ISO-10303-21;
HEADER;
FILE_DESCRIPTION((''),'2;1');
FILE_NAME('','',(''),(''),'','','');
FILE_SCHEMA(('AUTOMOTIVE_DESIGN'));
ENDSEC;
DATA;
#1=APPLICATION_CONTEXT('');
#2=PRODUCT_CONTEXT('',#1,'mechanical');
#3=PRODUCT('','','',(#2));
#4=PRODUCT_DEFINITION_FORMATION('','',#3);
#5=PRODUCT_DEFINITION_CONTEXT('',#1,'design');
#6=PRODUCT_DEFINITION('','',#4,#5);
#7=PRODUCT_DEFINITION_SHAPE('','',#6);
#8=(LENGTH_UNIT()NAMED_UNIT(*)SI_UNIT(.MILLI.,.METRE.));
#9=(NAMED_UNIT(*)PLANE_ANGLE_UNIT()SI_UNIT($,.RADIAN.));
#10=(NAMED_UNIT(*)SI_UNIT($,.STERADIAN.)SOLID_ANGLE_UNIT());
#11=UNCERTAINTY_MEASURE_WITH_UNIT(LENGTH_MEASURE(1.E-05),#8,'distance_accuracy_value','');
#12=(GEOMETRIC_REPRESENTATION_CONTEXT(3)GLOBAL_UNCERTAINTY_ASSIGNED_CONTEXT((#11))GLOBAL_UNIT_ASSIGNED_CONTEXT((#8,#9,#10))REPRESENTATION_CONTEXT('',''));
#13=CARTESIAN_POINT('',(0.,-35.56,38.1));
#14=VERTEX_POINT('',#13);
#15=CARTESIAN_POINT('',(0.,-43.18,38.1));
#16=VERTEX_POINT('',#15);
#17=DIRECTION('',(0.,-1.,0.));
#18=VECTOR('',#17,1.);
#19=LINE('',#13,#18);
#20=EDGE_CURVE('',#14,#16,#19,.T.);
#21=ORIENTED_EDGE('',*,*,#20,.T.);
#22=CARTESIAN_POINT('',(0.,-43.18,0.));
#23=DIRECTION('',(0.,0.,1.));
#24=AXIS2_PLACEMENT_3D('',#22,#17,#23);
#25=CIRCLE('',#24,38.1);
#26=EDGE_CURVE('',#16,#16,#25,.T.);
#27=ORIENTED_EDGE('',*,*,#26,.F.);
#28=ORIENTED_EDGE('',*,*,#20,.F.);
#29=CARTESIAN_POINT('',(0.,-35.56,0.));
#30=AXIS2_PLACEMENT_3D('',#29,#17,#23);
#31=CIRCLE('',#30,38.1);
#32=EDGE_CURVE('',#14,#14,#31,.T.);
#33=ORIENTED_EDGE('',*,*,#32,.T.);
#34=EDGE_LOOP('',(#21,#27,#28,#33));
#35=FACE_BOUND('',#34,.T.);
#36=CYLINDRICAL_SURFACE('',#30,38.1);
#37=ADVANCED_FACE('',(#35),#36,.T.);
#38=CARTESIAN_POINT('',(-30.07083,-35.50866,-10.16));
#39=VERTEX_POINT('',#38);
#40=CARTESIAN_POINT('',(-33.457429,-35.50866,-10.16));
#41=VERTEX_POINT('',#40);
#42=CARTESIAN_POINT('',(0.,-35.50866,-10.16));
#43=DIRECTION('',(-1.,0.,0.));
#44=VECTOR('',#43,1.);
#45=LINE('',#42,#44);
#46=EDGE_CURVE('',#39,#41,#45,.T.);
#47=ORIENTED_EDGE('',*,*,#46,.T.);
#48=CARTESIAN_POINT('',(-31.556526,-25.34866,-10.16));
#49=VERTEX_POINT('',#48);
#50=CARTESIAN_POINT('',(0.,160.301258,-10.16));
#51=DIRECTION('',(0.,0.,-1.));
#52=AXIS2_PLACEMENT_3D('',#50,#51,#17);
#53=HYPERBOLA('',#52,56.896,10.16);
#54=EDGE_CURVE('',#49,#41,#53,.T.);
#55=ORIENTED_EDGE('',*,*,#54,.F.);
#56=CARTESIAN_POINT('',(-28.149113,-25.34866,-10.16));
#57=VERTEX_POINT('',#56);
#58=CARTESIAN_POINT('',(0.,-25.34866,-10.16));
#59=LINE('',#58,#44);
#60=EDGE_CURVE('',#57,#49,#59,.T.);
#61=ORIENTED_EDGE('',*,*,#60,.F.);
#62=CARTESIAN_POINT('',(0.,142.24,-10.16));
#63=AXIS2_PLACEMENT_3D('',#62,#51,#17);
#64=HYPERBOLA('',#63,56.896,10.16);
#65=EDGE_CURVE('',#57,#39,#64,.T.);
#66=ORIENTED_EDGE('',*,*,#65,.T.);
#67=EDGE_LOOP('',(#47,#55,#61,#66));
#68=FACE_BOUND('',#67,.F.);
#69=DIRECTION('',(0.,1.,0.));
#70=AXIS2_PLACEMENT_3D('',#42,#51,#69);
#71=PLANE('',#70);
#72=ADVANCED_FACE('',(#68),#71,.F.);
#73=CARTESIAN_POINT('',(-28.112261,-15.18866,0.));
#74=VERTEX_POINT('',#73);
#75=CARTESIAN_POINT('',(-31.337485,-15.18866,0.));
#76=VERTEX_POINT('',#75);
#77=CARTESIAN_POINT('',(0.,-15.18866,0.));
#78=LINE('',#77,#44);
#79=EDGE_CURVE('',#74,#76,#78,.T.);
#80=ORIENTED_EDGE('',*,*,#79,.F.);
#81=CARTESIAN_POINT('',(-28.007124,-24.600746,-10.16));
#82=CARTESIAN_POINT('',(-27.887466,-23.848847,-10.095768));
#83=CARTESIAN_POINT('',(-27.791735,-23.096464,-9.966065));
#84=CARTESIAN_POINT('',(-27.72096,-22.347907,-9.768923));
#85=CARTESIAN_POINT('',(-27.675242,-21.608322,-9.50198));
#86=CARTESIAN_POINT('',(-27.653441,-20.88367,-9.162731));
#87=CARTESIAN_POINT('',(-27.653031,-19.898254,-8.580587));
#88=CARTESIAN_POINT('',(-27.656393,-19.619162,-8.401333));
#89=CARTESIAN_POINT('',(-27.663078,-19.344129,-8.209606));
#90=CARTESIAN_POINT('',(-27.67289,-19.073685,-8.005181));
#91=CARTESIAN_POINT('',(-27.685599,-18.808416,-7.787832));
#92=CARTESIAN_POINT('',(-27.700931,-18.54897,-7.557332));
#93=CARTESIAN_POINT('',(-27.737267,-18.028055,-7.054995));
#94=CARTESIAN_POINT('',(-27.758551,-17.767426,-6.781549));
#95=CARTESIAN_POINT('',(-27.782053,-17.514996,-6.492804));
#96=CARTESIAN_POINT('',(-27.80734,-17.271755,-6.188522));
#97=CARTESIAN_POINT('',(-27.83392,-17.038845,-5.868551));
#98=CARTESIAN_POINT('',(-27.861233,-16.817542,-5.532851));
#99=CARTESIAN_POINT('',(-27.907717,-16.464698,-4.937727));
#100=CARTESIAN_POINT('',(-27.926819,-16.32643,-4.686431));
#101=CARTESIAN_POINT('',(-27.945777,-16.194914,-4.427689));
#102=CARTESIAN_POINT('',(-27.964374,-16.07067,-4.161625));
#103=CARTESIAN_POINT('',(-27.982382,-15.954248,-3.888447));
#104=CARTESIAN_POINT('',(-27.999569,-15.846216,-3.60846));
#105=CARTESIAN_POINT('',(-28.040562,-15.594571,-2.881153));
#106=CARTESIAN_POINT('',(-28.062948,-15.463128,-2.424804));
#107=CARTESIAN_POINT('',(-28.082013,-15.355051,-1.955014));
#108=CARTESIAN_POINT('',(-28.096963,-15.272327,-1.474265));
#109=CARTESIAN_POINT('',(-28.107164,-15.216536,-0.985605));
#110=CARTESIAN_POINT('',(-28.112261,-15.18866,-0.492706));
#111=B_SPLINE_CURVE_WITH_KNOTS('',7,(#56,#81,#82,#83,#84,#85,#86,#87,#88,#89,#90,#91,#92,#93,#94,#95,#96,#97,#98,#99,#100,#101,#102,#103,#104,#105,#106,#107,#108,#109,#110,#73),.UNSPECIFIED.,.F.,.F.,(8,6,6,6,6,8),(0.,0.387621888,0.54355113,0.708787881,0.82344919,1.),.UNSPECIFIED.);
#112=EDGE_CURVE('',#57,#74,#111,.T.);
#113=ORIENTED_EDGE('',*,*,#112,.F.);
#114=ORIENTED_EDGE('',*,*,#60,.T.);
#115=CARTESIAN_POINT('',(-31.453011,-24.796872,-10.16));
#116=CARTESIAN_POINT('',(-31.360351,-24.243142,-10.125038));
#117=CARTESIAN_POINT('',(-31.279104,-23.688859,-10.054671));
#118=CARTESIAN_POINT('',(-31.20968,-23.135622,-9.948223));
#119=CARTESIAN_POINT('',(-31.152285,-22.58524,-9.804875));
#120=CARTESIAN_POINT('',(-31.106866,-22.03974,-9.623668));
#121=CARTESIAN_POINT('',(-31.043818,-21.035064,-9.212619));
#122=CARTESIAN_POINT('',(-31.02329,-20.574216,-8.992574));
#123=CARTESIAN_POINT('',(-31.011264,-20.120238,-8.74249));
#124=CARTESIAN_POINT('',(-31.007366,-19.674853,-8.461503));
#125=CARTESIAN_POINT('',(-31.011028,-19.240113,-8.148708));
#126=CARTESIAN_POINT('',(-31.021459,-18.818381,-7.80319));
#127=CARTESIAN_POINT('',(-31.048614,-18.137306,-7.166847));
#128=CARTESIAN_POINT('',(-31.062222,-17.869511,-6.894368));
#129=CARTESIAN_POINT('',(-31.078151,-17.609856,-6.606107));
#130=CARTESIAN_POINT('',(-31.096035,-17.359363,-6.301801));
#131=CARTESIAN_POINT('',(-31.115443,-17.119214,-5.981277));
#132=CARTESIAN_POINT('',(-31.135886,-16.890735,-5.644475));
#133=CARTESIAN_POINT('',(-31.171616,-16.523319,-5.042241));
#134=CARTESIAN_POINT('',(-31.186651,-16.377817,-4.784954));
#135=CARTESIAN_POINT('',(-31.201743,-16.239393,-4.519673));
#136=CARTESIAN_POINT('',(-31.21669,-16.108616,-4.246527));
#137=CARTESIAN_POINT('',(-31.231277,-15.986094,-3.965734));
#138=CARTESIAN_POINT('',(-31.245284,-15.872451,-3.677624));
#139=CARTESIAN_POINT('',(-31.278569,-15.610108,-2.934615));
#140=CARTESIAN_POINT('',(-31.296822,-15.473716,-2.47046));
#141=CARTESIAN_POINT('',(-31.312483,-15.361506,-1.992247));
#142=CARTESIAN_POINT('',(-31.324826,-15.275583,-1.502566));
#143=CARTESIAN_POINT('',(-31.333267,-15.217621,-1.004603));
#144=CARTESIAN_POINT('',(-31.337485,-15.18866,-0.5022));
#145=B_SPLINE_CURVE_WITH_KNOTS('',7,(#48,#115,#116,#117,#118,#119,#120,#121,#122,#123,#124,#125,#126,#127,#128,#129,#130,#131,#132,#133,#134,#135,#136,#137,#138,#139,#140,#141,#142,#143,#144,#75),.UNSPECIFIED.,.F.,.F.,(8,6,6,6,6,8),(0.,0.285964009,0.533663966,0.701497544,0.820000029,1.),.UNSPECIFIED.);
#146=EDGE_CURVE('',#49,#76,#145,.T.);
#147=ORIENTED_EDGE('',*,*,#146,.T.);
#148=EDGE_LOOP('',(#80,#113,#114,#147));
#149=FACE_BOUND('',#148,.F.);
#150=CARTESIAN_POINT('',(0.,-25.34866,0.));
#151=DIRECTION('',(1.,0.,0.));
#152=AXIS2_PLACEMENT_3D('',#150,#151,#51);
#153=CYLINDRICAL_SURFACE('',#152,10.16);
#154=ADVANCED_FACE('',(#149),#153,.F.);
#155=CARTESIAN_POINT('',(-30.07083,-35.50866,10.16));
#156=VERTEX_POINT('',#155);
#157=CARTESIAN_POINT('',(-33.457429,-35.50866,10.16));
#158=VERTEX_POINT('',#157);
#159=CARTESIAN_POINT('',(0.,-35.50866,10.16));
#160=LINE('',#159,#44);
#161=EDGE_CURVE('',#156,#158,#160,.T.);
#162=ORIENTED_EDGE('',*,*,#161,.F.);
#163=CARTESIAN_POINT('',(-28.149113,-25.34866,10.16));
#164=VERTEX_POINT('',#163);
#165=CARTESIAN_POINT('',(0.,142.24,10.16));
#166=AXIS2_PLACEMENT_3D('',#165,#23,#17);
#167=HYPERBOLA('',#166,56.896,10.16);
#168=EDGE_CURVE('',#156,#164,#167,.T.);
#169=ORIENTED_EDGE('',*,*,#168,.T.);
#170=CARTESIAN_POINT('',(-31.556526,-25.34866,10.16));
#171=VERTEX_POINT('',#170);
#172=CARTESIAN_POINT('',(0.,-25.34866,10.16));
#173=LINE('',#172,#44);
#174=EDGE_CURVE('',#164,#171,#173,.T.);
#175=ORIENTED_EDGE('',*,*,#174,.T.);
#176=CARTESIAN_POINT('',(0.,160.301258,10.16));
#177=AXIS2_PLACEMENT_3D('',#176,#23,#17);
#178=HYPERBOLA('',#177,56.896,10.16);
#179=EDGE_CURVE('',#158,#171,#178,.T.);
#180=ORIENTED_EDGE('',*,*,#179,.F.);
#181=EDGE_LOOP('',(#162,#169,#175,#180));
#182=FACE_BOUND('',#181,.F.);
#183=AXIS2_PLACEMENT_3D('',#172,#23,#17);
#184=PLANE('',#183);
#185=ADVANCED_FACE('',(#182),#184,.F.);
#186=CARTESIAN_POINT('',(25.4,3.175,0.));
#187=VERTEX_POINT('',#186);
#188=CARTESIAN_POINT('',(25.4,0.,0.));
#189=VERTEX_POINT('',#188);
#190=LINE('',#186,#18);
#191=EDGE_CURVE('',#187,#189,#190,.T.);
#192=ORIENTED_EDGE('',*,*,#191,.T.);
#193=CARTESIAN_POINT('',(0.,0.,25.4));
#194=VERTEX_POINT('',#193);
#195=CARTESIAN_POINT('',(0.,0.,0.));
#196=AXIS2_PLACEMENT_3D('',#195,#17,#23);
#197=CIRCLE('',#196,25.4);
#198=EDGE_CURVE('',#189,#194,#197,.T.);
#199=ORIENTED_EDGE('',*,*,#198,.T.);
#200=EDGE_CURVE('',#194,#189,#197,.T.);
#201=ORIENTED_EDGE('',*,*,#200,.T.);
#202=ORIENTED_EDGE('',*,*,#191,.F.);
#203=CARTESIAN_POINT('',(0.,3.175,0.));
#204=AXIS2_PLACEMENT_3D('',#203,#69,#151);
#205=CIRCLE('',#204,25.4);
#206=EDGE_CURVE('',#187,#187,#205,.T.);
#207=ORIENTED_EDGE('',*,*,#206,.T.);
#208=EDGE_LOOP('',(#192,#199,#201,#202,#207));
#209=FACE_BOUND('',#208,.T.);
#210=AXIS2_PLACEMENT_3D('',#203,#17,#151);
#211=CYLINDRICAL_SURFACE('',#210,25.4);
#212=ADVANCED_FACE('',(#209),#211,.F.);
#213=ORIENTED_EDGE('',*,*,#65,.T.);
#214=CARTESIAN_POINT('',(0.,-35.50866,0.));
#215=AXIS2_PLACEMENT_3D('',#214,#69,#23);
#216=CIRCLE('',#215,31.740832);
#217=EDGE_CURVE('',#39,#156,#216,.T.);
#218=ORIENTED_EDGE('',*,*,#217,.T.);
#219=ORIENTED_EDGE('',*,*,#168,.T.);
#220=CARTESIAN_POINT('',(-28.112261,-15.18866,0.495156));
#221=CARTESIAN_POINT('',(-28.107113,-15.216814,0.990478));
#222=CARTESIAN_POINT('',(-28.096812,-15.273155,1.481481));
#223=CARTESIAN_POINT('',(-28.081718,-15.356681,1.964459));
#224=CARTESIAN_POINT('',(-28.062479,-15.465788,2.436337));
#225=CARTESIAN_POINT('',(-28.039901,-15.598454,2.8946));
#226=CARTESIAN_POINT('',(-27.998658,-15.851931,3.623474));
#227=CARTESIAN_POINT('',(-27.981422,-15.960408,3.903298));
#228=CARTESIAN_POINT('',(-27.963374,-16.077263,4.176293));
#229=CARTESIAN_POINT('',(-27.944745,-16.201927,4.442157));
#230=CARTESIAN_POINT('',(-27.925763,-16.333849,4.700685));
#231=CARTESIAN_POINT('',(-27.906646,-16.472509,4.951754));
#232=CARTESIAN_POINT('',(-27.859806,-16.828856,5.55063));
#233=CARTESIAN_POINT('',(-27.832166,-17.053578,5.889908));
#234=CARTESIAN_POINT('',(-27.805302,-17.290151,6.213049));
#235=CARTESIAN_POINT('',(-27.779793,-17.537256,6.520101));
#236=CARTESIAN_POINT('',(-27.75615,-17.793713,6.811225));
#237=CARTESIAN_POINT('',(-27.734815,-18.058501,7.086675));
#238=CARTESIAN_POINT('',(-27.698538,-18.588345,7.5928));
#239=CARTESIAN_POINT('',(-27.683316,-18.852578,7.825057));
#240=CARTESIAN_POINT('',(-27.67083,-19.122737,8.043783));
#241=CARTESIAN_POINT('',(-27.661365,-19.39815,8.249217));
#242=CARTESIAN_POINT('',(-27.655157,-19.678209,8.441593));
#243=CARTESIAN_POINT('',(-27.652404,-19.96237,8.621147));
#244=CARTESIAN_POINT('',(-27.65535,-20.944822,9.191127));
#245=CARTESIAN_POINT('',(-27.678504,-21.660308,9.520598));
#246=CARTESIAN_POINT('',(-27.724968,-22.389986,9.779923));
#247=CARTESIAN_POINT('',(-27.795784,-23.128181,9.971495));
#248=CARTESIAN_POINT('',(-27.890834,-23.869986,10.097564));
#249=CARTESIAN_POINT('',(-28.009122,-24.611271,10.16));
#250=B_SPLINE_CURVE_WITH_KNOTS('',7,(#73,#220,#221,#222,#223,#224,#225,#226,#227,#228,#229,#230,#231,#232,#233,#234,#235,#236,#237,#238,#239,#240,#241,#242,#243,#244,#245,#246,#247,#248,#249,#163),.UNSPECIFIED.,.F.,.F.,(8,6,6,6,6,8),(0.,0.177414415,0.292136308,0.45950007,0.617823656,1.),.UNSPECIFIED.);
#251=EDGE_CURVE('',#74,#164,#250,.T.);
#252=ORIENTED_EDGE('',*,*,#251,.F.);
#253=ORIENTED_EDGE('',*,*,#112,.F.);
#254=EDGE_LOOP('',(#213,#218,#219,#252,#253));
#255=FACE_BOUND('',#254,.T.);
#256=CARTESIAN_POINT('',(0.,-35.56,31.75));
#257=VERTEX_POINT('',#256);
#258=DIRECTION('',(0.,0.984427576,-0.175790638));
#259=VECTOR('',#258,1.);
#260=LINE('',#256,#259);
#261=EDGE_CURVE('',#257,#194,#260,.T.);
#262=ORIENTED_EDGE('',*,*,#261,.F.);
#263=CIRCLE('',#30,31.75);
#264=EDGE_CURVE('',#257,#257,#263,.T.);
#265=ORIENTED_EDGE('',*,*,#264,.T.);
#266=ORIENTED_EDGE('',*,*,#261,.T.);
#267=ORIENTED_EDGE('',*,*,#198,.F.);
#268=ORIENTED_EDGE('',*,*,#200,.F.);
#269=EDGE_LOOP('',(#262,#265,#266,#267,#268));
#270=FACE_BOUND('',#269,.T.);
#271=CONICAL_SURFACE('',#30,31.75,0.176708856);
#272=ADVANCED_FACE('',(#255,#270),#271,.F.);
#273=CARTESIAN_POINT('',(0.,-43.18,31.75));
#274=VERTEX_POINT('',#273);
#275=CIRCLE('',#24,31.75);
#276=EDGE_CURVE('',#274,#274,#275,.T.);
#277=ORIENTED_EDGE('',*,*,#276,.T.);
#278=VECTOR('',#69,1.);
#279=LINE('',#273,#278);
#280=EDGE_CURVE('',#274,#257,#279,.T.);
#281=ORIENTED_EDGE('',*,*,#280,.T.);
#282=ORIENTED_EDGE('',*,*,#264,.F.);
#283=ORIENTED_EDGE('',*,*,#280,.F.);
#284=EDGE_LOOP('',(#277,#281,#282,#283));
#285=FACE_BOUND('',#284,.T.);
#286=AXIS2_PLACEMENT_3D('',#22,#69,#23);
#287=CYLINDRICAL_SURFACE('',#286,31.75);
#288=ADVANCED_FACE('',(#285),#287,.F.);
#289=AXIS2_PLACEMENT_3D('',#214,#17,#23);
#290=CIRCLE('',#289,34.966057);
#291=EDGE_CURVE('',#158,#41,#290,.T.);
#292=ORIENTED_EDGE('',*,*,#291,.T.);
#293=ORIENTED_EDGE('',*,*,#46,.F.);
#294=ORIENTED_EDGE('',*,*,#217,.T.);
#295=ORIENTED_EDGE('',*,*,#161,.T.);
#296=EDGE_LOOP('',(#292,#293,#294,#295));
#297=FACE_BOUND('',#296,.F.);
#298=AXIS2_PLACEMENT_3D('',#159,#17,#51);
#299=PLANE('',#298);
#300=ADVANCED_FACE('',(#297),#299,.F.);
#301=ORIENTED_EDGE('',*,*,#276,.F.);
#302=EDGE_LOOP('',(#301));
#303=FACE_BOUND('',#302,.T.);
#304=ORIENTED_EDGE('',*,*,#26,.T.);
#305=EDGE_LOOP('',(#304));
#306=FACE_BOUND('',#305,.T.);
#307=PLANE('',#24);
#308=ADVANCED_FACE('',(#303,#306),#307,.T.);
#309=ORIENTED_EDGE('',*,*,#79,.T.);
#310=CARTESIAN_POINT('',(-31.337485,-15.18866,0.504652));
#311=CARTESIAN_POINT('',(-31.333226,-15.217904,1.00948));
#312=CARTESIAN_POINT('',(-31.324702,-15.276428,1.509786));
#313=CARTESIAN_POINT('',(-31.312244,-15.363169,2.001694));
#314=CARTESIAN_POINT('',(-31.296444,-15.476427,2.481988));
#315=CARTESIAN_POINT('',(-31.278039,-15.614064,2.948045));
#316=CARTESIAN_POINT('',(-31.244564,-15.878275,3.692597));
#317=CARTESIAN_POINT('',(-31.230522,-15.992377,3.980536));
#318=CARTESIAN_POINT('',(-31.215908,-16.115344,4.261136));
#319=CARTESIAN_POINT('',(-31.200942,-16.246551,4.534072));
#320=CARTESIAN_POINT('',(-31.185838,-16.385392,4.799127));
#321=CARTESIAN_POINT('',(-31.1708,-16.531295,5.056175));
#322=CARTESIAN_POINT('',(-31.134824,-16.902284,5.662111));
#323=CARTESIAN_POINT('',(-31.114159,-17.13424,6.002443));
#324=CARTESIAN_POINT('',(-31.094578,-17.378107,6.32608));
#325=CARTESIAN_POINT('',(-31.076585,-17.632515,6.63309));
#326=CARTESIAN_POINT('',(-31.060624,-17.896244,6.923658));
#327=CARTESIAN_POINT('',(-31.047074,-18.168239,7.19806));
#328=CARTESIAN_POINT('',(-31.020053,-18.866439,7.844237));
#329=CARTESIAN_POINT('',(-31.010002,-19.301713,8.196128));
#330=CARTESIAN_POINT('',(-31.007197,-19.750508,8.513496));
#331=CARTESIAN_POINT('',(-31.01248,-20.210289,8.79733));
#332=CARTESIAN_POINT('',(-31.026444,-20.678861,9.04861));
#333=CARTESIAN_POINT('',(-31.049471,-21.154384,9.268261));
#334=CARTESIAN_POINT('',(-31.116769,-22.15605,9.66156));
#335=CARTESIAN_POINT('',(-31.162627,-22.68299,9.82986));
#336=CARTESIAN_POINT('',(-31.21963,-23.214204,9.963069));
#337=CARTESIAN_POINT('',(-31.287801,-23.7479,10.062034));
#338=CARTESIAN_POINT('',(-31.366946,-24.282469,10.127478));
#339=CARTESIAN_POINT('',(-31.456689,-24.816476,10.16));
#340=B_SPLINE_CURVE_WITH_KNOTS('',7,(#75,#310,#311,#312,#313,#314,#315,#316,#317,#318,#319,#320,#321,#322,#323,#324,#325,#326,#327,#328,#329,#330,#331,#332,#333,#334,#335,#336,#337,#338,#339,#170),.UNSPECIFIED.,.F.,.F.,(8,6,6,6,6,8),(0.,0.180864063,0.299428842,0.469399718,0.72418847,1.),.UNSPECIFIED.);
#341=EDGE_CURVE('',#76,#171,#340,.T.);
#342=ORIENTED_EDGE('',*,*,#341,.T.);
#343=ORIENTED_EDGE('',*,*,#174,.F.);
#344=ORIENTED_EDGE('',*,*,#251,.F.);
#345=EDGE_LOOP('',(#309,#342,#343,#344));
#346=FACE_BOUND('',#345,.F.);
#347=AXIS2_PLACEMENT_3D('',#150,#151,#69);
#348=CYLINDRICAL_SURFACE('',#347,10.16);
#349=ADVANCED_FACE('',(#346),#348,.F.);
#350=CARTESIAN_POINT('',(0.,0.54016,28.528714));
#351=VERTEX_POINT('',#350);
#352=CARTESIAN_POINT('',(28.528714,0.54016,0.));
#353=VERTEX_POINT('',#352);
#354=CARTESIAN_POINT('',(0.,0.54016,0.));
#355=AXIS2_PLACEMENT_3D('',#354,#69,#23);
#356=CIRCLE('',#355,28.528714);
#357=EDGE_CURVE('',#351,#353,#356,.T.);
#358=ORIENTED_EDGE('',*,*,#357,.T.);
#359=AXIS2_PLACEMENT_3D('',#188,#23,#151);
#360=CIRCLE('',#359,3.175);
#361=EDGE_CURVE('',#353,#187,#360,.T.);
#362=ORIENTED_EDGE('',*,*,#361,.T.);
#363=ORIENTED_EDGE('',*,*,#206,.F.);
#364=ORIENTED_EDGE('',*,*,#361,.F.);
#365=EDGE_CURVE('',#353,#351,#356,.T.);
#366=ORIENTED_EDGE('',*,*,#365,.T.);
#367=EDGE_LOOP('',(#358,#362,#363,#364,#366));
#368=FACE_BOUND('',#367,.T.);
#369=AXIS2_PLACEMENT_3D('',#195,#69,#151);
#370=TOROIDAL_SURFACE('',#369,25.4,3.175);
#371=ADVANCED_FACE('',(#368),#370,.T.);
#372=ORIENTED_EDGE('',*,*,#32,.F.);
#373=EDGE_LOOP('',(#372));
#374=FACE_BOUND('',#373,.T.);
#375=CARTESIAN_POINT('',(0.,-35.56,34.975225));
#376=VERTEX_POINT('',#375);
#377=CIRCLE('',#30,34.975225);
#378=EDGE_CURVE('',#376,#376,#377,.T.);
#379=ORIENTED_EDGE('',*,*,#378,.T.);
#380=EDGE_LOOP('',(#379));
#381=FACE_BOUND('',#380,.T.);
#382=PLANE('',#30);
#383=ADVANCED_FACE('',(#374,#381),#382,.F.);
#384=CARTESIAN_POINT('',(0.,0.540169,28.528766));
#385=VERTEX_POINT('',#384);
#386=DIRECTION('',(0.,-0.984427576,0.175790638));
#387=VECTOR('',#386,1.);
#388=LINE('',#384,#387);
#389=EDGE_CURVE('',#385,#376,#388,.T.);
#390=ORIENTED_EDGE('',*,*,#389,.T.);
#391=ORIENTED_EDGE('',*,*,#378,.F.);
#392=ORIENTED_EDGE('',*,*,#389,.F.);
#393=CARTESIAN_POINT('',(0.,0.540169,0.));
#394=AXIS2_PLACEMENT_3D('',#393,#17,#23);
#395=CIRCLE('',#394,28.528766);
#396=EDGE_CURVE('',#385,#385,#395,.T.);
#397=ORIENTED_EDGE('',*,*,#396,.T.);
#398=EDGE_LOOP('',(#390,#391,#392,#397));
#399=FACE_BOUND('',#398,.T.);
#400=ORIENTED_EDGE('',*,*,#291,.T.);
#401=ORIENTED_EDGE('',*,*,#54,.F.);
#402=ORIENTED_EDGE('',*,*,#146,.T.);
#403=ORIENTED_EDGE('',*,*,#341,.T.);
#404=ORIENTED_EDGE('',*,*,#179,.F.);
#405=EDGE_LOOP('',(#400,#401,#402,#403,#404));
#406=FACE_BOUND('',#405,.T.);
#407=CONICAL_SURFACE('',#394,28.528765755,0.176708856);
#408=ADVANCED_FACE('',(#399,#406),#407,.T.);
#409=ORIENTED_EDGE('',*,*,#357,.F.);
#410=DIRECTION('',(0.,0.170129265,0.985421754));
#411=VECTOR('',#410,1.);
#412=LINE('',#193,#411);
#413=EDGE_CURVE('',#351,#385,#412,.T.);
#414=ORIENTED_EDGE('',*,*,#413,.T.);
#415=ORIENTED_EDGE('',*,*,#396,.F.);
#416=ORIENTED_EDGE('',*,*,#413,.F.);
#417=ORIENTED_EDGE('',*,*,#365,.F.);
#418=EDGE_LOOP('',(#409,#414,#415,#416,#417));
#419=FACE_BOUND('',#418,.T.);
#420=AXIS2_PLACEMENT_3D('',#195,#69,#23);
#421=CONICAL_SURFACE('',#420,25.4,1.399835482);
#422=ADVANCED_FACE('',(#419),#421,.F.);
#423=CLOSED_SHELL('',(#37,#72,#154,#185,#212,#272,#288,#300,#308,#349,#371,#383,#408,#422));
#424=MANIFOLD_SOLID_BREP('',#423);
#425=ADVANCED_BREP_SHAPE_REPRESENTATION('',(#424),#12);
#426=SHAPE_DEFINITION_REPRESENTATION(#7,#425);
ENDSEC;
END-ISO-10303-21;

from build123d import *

# Parameters (mm, degrees)
F6_DEPTH = 38.1


with BuildPart() as f2:
    # F0 (on Right) → F2 (revolve)
    with BuildSketch(Plane.YZ):
        Polygon((-35.56, 31.75), (0, 25.4), (0.5401693397, 28.5287657554), (-35.56, 34.975224566), align=None)
    revolve(axis=Axis((0, -17.78, 0), (0, -1, 0)))

    # F1 (on Top) → F3 (revolve)
    with BuildSketch(Plane.XY):
        with BuildLine():
            Line((25.4, 3.175), (25.4, 0))
            Line((25.4, 0), (28.575, 0))
            ThreePointArc((28.575, 0), (27.6450640303, 2.2450640303), (25.4, 3.175))
        make_face()
    revolve(axis=Axis((0, 1.5875, 0), (0, 1, 0)))

    # F0 (on Right) → F4 (revolve)
    with BuildSketch(Plane.YZ):
        Polygon((-43.18, 31.75), (-35.56, 31.75), (-35.56, 34.975224566), (-35.56, 38.1), (-43.18, 38.1), align=None)
    revolve(axis=Axis((0, -39.37, 0), (0, -1, 0)))

    # F5 (on Right) → F6 (cut)
    with BuildSketch(Plane.YZ):
        with BuildLine():
            Line((-35.5086600387, 10.16), (-35.5086600387, 0))
            Line((-35.5086600387, 0), (-35.5086600387, -10.16))
            Line((-35.5086600387, -10.16), (-25.3486600387, -10.16))
            ThreePointArc((-25.3486600387, -10.16), (-18.1644551419, -7.1842048969), (-15.1886600387, 0))
            ThreePointArc((-15.1886600387, 0), (-18.1644551419, 7.1842048969), (-25.3486600387, 10.16))
            Line((-25.3486600387, 10.16), (-35.5086600387, 10.16))
        make_face()
    extrude(amount=-F6_DEPTH, mode=Mode.SUBTRACT)


solid = f2.part
